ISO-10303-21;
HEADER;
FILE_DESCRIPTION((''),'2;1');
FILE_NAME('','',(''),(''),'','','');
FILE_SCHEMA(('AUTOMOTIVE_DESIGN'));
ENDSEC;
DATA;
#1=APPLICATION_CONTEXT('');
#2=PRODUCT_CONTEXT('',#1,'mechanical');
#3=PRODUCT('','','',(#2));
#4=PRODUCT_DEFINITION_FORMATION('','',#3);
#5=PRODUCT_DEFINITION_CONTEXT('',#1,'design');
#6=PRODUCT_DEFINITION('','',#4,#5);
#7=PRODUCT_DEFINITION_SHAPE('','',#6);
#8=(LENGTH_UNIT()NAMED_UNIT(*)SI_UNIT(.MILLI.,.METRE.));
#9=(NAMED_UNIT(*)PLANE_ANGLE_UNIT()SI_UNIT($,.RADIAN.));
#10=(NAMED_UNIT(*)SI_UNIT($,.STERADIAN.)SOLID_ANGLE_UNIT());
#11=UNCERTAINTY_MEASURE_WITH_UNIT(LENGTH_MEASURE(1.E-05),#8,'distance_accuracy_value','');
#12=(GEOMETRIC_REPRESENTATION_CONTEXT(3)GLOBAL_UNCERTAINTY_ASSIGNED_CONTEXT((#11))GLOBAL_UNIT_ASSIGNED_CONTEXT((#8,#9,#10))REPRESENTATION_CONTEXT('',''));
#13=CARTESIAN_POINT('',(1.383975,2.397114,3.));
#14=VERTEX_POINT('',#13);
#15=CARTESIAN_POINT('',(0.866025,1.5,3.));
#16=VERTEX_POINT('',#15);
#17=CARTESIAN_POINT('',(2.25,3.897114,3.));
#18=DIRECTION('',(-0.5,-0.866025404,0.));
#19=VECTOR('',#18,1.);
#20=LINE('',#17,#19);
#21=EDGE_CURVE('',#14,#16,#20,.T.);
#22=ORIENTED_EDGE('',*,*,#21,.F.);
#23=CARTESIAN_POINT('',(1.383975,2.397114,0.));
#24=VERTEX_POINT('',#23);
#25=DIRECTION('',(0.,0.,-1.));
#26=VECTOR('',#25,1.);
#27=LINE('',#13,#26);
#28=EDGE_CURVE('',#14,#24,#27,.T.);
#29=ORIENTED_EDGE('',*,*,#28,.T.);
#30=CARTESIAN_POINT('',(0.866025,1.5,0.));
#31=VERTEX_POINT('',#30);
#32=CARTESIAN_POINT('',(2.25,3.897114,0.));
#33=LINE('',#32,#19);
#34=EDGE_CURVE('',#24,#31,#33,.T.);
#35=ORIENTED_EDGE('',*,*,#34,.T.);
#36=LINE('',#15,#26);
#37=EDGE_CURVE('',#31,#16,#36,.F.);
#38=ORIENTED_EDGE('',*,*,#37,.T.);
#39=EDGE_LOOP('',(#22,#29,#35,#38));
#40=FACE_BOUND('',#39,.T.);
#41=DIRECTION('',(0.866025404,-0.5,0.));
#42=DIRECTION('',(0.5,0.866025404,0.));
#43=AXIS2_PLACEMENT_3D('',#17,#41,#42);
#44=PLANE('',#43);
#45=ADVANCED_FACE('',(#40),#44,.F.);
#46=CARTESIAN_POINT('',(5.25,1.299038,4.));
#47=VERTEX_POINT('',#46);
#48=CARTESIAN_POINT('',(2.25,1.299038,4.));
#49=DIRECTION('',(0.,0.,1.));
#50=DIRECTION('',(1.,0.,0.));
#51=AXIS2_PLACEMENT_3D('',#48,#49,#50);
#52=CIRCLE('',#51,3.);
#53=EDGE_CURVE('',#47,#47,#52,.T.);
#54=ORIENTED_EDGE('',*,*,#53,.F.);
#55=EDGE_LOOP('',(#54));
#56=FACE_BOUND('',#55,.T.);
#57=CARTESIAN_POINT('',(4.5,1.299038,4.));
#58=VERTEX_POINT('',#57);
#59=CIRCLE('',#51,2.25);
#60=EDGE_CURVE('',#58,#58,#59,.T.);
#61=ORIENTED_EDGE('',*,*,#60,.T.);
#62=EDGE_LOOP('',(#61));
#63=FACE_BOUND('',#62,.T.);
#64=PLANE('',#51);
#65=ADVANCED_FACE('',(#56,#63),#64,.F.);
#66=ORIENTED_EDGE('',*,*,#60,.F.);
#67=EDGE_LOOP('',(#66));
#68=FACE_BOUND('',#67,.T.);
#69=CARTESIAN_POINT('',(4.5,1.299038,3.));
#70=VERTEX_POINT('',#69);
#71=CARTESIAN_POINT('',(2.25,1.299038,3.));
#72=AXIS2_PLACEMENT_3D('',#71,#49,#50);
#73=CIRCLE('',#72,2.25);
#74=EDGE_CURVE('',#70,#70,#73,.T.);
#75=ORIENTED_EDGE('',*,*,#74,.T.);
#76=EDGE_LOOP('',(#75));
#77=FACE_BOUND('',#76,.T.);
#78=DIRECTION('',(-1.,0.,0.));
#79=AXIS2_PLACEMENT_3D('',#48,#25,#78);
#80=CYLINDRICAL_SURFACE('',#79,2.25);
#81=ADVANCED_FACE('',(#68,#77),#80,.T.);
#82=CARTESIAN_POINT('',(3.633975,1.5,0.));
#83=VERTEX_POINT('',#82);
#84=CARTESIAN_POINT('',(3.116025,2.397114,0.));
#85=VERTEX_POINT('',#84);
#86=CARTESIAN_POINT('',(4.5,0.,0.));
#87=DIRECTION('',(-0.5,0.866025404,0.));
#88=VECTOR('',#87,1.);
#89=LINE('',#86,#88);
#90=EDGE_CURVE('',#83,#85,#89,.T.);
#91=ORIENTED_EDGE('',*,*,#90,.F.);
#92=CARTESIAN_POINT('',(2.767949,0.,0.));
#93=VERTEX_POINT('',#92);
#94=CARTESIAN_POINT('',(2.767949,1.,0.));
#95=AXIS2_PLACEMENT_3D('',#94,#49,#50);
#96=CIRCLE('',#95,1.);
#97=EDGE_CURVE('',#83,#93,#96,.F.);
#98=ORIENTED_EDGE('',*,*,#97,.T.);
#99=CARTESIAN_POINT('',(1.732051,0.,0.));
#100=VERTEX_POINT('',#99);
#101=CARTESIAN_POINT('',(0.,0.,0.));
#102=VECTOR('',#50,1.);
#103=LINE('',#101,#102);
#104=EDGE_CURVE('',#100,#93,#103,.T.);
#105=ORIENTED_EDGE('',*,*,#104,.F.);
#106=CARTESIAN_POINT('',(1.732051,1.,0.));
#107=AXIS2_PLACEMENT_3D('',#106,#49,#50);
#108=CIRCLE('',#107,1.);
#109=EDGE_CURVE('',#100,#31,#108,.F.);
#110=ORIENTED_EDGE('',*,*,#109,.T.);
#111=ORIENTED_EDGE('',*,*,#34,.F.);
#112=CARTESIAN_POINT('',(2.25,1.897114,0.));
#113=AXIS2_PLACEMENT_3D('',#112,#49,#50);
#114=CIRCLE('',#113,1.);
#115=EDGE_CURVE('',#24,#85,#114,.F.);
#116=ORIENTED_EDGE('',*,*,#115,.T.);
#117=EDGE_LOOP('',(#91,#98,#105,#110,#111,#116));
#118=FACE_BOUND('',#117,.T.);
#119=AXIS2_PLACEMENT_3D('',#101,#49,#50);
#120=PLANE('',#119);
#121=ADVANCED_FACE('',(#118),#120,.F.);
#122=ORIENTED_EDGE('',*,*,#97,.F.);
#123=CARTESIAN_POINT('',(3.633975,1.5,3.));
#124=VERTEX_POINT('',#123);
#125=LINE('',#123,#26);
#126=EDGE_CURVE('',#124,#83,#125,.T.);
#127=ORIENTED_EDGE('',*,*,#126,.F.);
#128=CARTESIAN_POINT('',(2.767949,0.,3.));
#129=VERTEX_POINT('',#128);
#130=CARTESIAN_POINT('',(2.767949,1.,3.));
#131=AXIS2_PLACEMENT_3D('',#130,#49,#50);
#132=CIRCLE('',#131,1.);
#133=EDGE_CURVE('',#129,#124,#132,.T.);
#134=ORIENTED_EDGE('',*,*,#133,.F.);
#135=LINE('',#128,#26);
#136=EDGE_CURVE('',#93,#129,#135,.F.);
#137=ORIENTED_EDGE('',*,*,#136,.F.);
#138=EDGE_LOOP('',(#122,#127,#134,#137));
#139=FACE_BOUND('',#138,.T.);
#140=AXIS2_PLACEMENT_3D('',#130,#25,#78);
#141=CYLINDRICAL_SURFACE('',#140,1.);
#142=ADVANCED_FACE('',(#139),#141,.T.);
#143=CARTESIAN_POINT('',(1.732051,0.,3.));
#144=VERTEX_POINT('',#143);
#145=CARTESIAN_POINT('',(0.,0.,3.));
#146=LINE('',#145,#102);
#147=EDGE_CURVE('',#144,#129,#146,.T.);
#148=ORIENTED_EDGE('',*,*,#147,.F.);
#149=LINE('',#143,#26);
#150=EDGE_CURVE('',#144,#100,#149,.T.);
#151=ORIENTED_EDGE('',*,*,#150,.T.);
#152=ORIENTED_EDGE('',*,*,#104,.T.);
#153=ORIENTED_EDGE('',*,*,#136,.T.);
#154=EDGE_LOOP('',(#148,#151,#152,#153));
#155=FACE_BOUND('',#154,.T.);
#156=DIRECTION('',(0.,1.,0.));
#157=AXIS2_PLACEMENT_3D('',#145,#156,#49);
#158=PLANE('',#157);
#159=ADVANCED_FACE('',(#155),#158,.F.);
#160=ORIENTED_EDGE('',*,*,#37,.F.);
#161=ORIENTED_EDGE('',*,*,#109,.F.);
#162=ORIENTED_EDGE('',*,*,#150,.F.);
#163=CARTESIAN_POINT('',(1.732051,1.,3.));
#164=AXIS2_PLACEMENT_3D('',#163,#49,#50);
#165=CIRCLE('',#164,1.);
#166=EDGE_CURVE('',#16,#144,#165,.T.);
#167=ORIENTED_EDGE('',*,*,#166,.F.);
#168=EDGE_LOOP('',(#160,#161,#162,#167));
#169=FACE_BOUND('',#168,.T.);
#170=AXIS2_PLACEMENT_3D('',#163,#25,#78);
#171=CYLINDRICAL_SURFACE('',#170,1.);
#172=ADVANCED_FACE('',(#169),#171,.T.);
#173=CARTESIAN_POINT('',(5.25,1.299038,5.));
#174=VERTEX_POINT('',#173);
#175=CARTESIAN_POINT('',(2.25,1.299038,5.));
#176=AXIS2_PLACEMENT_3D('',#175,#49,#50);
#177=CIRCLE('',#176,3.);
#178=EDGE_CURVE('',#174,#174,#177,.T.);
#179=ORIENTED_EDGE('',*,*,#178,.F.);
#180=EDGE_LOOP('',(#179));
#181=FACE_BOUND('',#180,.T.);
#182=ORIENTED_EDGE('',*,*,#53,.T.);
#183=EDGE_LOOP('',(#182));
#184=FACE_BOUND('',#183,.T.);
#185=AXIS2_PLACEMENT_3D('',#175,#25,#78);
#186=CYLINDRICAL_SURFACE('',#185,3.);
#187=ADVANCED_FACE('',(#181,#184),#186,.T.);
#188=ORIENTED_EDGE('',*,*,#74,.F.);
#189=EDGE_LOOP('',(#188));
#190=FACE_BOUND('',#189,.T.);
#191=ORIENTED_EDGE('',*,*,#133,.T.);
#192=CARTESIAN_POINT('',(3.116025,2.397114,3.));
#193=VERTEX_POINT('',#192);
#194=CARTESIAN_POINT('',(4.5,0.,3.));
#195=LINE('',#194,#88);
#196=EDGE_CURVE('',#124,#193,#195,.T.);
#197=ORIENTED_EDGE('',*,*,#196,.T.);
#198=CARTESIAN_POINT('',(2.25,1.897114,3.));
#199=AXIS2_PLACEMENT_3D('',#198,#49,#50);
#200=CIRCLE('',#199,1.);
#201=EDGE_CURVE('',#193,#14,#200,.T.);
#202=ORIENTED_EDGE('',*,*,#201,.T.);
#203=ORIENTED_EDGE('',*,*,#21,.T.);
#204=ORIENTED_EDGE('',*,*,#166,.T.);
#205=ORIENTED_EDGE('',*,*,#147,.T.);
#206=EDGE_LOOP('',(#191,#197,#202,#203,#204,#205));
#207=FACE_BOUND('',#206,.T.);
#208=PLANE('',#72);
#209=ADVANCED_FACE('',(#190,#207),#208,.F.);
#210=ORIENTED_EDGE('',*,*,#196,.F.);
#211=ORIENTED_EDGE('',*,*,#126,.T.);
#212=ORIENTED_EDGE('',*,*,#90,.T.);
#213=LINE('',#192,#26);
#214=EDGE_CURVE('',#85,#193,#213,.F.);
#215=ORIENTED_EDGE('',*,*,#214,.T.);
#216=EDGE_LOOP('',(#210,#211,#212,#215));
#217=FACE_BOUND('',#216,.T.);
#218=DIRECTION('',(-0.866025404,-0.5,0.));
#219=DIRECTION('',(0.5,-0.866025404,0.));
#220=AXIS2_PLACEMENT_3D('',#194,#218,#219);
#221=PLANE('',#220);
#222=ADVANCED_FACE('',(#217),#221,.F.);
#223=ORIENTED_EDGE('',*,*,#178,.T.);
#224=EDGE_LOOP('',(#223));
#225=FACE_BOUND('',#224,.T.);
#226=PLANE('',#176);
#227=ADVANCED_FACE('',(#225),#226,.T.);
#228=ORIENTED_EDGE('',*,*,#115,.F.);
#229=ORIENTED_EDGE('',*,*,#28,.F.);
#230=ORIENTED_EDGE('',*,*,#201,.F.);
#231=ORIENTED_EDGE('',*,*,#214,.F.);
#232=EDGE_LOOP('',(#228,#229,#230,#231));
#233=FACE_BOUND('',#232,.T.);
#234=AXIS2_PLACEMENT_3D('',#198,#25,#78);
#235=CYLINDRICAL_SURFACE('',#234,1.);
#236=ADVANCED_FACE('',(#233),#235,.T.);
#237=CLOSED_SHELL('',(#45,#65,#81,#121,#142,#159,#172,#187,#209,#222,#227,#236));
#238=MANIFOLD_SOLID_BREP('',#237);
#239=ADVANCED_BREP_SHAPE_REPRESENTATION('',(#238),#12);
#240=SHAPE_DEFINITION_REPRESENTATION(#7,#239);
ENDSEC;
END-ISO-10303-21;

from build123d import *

# Parameters (mm, degrees)
EXTRUDE_1_DEPTH = 3
SKETCH_2_R      = 2.25
EXTRUDE_2_DEPTH = 1
SKETCH_3_R      = 3
EXTRUDE_3_DEPTH = 1
FILLET_1_R      = 1


with BuildPart() as part:
    # 草图1 → 凸台-拉伸1 (new body)
    with BuildSketch(Plane.XY):
        Polygon((0, 0), (4.5, 0), (2.25, 3.897114317), align=None)
    extrude(amount=EXTRUDE_1_DEPTH)

    # 草图2 → 凸台-拉伸2 (add)
    with BuildSketch(Plane.XY.offset(3)):
        with Locations(Location((2.25, 1.299038106, 0), (0, 0, 204.735610317))):
            Circle(SKETCH_2_R)
    extrude(amount=EXTRUDE_2_DEPTH)

    # 草图3 → 凸台-拉伸3 (add)
    with BuildSketch(Plane.XY.offset(4)):
        with Locations((2.25, 1.299038106)):
            Circle(SKETCH_3_R)
    extrude(amount=EXTRUDE_3_DEPTH)

    # 圆角1
    # the kernel refuses this fillet: 1 mm, written as the material it takes off along each edge
    with BuildSketch(Plane(origin=(2.25, 3.897114317, -4.330127019), x_dir=(-0.4999999999999997, -0.8660254037844388, 0), z_dir=(0, 0, 1))) as fillet_1_piece_1:
        with BuildLine():
            CenterArc((FILLET_1_R * 1.73205080757, FILLET_1_R), FILLET_1_R, 150, 120)
            Line((FILLET_1_R * 0.866025403784, FILLET_1_R * 1.5), (0, 0))
            Line((0, 0), (FILLET_1_R * 1.73205080757, 0))
        make_face()
    extrude(amount=7.330127019, mode=Mode.SUBTRACT)
    with BuildSketch(Plane(origin=(4.5, 0, -4.330127019), x_dir=(-1, 0, 0), z_dir=(0, 0, 1)), Plane(origin=(0, 0, -4.330127019), x_dir=(0.49999999999999983, 0.8660254037844387, 0), z_dir=(0, 0, 1))) as fillet_1_piece_2:
        with BuildLine():
            CenterArc((FILLET_1_R * 1.73205080757, -FILLET_1_R), FILLET_1_R, 90, 120)
            Line((FILLET_1_R * 0.866025403784, -FILLET_1_R * 1.5), (0, 0))
            Line((0, 0), (FILLET_1_R * 1.73205080757, 0))
        make_face()
    extrude(amount=7.330127019, mode=Mode.SUBTRACT)


solid = part.part
